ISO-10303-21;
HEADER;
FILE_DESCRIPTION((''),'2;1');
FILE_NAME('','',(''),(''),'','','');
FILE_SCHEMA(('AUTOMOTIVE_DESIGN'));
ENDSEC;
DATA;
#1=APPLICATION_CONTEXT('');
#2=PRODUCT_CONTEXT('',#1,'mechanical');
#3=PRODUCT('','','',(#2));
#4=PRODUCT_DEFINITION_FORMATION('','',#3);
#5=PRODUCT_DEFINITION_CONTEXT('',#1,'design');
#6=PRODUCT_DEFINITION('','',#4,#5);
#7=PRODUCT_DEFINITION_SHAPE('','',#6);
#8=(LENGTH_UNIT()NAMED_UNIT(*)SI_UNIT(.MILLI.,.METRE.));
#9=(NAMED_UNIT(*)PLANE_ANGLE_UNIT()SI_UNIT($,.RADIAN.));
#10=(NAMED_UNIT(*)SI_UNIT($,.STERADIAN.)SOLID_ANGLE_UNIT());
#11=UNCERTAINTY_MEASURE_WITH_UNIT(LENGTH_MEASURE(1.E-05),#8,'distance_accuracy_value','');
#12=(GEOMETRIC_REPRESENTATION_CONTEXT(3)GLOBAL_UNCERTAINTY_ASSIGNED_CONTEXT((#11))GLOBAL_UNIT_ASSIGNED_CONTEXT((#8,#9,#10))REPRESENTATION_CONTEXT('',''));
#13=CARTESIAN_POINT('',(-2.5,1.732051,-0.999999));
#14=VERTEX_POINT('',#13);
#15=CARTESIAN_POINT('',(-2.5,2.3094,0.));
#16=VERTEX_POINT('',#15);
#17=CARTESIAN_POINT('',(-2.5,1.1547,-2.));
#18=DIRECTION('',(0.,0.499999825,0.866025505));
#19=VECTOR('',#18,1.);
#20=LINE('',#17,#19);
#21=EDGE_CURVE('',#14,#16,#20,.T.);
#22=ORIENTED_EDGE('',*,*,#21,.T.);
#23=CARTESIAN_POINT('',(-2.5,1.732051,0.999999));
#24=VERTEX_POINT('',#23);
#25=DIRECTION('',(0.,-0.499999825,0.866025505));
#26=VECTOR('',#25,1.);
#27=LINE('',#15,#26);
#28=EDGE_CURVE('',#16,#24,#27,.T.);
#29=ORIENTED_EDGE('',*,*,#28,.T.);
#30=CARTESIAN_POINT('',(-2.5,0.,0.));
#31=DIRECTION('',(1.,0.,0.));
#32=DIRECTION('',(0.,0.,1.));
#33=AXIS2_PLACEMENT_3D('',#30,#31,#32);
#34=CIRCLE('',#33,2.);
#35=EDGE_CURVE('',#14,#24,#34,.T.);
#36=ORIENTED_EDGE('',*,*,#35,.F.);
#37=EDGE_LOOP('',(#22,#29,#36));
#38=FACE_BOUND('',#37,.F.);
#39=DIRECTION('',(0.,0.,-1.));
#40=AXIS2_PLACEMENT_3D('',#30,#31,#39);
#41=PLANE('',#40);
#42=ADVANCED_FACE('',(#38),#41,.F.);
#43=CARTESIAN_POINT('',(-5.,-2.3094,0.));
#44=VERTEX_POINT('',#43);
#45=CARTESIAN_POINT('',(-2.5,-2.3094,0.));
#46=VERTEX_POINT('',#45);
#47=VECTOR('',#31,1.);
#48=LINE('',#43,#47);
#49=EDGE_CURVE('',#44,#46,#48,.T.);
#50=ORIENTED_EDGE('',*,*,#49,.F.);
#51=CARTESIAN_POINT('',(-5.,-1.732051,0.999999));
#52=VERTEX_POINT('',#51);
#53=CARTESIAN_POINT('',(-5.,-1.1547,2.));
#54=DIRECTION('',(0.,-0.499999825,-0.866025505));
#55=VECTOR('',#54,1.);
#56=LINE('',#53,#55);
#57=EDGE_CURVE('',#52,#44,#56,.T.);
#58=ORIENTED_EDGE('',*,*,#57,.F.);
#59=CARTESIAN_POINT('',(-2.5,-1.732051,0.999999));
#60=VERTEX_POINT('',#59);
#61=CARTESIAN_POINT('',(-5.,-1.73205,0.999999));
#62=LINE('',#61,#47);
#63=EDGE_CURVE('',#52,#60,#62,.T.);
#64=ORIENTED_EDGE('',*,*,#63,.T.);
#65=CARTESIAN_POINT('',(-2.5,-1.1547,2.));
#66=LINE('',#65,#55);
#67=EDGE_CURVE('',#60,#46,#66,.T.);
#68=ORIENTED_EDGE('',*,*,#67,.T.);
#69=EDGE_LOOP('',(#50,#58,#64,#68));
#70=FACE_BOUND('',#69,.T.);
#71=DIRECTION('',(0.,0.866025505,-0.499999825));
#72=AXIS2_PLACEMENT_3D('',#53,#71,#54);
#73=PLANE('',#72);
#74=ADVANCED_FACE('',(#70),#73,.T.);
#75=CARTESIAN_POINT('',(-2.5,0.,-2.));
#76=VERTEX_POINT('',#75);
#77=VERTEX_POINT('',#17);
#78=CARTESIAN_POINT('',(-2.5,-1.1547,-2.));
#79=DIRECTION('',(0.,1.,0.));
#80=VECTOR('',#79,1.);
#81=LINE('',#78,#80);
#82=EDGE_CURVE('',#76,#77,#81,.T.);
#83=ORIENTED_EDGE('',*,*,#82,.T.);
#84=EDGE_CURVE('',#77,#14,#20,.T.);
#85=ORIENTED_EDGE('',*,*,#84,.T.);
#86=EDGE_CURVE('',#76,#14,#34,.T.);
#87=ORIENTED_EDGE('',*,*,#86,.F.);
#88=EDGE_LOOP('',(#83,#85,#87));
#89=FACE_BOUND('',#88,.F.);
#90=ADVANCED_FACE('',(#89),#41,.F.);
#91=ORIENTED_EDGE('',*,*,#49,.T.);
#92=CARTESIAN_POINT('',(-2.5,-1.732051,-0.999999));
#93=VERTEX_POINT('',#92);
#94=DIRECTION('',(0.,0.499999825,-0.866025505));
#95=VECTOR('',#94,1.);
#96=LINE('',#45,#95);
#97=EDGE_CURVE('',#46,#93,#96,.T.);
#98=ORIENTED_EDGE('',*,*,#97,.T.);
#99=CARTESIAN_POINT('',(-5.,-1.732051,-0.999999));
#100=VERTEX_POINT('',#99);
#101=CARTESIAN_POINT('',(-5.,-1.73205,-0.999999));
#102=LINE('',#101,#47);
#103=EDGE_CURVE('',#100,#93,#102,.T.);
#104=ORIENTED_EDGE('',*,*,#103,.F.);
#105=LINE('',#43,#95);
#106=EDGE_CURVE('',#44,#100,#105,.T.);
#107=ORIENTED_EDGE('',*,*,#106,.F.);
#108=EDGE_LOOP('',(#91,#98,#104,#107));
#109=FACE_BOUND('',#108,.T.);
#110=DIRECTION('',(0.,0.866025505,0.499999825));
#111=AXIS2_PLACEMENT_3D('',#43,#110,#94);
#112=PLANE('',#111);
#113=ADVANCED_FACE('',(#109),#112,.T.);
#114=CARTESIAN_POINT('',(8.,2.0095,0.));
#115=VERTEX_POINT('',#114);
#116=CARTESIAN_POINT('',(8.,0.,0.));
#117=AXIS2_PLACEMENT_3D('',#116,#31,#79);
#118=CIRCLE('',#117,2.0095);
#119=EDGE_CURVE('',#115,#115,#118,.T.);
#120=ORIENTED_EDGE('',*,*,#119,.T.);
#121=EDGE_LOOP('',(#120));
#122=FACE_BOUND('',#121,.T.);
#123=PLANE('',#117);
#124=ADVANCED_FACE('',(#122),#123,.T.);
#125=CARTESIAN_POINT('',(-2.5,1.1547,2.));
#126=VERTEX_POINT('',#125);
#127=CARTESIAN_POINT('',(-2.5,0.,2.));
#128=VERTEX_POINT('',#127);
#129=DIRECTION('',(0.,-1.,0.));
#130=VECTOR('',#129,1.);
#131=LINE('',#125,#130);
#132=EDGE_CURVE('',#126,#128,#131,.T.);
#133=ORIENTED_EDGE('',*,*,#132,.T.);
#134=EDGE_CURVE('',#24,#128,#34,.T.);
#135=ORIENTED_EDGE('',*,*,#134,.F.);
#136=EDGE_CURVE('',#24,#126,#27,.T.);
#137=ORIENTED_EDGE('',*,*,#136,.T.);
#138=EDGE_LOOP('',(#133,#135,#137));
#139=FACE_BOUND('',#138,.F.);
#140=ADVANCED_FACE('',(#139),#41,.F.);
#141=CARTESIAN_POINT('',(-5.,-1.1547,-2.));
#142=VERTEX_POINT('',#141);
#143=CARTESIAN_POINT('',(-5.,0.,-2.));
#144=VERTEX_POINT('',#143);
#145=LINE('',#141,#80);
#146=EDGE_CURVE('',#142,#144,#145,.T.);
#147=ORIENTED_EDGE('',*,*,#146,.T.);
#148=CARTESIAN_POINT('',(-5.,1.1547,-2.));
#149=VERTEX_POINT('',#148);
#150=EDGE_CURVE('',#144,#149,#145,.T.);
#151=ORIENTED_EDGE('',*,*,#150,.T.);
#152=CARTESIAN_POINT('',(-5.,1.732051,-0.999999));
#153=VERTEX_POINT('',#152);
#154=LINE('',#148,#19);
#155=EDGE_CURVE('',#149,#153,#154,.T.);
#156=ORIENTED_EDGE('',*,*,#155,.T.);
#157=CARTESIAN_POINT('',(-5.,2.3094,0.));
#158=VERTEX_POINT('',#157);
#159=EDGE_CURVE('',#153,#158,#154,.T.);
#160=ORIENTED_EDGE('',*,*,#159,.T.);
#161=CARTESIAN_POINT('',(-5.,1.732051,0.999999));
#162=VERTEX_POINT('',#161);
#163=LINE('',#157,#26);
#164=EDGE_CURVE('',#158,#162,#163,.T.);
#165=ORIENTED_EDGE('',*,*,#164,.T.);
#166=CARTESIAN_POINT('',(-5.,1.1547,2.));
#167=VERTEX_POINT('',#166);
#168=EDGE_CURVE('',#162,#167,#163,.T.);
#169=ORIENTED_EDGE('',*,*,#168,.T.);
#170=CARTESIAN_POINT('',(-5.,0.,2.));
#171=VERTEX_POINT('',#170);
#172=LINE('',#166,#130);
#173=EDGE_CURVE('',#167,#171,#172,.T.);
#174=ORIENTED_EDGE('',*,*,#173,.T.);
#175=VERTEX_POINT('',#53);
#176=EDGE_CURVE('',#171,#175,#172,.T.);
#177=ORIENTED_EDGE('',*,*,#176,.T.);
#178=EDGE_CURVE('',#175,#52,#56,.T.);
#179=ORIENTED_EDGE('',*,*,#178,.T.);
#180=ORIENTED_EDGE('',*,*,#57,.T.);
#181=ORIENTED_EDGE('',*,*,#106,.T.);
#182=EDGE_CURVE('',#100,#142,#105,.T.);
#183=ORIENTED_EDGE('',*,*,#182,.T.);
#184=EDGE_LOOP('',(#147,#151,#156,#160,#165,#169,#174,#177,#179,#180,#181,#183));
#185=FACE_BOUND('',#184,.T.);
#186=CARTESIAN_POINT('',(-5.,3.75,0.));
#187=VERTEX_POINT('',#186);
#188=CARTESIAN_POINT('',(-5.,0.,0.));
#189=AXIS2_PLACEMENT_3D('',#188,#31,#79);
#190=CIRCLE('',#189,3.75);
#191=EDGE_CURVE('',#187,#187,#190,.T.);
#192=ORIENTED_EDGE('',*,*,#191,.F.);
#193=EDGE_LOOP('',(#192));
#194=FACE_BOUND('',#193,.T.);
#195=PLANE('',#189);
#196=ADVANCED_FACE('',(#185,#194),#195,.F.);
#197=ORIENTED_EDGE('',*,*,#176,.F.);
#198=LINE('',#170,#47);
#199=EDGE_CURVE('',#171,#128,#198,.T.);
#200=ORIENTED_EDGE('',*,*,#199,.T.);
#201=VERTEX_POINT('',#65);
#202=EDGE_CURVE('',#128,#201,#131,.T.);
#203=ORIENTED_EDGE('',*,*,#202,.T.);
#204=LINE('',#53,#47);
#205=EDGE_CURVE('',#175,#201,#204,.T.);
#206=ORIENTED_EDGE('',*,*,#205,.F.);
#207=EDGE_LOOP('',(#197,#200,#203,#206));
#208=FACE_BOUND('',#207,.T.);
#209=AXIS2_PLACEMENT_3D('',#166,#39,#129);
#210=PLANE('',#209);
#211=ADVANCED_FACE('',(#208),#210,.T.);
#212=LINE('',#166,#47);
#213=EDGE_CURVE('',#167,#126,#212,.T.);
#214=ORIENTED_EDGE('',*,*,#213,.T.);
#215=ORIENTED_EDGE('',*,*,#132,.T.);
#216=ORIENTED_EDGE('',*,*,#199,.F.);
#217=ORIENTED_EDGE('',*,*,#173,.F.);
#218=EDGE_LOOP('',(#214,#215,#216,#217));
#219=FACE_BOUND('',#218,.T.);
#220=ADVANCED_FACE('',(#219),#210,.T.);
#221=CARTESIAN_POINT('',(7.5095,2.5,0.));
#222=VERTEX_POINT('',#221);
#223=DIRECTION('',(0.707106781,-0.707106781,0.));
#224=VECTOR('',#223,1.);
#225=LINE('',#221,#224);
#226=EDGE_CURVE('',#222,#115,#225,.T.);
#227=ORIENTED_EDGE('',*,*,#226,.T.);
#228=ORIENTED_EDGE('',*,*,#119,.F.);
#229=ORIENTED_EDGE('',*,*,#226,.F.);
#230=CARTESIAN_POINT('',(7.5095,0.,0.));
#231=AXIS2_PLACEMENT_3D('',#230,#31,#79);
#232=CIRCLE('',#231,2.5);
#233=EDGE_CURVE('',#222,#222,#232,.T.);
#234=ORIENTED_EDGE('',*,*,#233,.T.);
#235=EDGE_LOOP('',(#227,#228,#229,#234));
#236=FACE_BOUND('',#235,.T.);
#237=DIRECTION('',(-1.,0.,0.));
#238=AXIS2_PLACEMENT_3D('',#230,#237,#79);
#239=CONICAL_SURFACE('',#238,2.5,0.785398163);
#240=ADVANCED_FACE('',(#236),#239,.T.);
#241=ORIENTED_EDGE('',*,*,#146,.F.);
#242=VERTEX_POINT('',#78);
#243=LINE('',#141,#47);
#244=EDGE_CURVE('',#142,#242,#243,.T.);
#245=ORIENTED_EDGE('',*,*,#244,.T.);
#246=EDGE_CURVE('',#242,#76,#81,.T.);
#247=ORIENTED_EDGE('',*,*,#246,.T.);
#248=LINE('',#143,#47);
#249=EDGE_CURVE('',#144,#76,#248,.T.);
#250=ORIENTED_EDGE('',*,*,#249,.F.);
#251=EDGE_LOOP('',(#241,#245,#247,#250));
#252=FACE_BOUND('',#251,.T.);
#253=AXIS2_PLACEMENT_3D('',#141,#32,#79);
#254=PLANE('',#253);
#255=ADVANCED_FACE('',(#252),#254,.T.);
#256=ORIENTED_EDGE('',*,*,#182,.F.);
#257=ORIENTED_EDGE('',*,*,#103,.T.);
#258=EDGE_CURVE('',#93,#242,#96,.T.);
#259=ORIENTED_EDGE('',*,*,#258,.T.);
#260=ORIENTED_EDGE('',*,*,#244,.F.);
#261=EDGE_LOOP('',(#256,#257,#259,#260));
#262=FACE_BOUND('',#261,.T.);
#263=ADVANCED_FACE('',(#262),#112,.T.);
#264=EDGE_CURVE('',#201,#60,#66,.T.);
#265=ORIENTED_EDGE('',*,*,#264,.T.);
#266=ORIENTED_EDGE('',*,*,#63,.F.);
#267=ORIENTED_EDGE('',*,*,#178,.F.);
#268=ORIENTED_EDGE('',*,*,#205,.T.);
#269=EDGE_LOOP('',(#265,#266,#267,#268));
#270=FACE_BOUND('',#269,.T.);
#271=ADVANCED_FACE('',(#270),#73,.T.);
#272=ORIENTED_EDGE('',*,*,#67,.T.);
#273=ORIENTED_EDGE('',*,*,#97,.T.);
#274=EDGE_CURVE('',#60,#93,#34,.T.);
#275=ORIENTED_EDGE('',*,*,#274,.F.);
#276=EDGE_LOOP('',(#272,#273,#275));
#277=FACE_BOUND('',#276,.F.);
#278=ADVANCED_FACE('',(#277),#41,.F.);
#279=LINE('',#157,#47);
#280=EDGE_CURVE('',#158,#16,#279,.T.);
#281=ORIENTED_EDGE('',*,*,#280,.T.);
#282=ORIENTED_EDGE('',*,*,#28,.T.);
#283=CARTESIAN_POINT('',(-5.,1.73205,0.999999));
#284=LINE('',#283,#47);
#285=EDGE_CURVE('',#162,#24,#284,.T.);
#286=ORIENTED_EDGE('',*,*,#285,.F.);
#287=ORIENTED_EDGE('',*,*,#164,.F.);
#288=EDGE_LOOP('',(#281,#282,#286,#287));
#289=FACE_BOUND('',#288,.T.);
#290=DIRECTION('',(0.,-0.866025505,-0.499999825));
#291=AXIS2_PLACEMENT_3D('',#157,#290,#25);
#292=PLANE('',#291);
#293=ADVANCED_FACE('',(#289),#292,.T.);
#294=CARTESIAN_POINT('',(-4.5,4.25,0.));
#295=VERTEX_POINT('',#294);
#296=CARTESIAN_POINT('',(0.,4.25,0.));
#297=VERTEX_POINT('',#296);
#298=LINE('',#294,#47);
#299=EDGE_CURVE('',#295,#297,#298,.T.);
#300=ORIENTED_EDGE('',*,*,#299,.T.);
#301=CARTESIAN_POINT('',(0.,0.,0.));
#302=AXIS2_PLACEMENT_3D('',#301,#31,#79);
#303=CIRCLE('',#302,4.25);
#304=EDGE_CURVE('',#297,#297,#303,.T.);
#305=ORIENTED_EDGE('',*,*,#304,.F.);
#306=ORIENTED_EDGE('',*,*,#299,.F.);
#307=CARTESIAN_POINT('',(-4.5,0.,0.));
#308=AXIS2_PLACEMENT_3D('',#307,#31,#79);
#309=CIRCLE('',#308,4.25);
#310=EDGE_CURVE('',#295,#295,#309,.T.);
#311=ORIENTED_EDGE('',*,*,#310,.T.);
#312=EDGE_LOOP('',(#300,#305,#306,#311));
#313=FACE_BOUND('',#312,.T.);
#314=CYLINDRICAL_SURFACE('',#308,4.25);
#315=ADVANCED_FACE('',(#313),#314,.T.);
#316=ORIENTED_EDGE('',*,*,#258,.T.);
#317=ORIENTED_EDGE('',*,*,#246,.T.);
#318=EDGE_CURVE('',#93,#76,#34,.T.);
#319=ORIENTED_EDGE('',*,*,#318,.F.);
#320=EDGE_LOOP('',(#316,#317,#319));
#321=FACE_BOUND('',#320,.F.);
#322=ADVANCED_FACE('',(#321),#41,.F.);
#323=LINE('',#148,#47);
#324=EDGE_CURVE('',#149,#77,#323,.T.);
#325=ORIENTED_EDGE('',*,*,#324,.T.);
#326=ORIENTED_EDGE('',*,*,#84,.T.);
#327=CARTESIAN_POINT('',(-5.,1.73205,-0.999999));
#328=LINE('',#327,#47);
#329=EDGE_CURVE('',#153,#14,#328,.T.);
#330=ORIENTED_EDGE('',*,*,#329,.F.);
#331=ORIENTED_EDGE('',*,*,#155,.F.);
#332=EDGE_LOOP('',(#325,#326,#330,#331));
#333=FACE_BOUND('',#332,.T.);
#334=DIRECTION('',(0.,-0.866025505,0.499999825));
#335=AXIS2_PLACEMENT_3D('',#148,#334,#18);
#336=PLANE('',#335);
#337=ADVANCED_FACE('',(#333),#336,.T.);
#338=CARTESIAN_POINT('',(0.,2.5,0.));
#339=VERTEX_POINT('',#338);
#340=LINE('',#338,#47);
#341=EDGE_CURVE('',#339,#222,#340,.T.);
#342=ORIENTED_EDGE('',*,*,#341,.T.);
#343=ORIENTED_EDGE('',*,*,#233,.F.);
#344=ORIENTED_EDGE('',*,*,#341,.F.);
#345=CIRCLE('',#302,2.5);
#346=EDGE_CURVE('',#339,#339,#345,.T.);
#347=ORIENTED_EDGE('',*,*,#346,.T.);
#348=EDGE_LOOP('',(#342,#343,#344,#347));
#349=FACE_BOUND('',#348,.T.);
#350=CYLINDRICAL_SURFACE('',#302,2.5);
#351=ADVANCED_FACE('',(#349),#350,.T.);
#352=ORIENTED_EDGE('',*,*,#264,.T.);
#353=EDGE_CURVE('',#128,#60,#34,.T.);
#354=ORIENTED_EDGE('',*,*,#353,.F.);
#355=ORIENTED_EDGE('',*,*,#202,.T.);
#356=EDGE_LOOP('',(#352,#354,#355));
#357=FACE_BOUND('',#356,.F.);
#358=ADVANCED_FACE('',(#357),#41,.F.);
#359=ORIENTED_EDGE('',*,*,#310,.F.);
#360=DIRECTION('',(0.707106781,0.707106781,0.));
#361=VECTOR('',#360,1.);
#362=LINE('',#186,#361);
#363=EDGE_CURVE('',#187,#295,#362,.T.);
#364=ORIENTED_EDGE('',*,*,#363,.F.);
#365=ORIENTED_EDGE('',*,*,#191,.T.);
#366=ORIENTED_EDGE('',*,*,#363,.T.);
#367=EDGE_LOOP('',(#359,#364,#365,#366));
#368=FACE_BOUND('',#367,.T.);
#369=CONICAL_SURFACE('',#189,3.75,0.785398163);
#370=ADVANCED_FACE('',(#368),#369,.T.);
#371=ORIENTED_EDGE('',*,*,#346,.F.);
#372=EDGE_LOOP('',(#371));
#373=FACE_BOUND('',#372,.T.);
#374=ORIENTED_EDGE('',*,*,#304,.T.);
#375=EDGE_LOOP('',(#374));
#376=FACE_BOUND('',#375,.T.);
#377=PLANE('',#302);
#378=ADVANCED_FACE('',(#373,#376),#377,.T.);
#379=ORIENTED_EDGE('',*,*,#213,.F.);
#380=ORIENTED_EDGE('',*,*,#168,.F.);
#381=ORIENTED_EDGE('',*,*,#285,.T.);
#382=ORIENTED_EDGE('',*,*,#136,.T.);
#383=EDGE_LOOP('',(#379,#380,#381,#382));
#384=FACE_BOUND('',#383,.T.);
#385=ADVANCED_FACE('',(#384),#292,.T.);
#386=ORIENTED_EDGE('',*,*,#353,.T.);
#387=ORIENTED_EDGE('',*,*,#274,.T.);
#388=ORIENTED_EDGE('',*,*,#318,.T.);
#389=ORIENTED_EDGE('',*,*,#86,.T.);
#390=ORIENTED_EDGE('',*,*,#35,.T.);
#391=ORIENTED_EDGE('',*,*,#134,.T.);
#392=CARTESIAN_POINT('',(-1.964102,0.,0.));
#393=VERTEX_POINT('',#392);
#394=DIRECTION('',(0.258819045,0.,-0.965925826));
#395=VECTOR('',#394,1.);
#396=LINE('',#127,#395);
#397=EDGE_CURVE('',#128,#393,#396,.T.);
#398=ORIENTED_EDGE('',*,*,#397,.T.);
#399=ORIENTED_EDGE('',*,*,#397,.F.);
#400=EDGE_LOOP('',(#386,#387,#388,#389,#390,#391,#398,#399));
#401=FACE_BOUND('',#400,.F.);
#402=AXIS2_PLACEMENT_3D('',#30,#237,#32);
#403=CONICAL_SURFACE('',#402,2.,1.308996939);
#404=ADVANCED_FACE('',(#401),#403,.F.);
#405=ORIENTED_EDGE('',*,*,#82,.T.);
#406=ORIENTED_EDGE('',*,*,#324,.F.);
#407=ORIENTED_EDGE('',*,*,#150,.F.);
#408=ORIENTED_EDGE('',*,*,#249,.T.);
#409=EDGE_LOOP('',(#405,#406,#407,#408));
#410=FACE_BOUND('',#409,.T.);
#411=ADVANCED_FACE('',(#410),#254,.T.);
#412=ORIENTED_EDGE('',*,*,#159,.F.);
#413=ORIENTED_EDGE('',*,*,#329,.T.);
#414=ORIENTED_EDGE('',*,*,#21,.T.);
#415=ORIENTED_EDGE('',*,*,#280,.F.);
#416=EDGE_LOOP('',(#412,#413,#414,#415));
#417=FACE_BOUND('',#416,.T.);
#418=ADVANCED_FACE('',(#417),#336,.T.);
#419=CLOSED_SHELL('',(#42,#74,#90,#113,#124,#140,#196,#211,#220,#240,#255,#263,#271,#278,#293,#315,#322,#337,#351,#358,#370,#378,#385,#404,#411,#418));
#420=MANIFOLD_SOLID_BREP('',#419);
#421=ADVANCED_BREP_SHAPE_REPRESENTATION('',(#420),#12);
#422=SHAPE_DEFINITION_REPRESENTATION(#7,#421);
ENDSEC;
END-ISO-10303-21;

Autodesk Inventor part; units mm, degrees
sketch "Sketch_1" plane through (0, 0, 0) normal (0, 0, 1) x (1, 0, 0)
  line L0 (8, 0) -> (-5, 0)
  line L1 (-5, 0) -> (-5, 3.75)
  line L2 (-5, 3.75) -> (-4.5, 4.25)
  line L3 (-4.5, 4.25) -> (0, 4.25)
  line L4 (0, 4.25) -> (0, 2.5)
  line L5 (0, 2.5) -> (7.5095, 2.5)
  line L6 (7.5095, 2.5) -> (8, 2.0095)
  line L7 (8, 2.0095) -> (8, 0)
  line L8 (8, 0) -> (-5, 0)
revolve "Revolution1" add sketch "Sketch_1" angle 360 about axis through (8, 0, 0) along (1, 0, 0)
thread "Thread1" size "M5x0.8" class "6g" standard "ISO Metric profile" length 6.7095
sketch "Sketch2" plane through (-5, 0, 0) normal (-1, 0, 0) x (0, 0, 1)
  point P0 (0, 0)
hole "Hole1" at (-5, 0, 0) direction (1, 0, 0) diameter 4 depth 2.5 tip angle 150
sketch "Sketch_3" plane through (-5, 0, 0) normal (1, 0, 0) x (0, 0, -1)
  line L0 (-2, -1.1547) -> (0, -2.3094)
  line L1 (0, -2.3094) -> (2, -1.1547)
  line L2 (2, -1.1547) -> (2, 1.1547)
  line L3 (2, 1.1547) -> (0, 2.3094)
  line L4 (0, 2.3094) -> (-2, 1.1547)
  line L5 (-2, 1.1547) -> (-2, -1.1547)
extrude "Extrusion1" cut sketch "Sketch_3" along normal blind 2.5
ref_plane "bolt_XY" through (0, 0, 0) normal (1, 0, 0) x (0, 0, -1)
ref_plane "bolt_YZ" through (0, 0, 0) normal (0, 0, -1) x (0, 1, 0)
ref_plane "bolt_ZX" through (0, 0, 0) normal (0, 1, 0) x (1, 0, 0)
ref_plane "nut_XY" through (8, 0, 0) normal (1, 0, 0) x (0, 0, -1)
ref_plane "nut_YZ" through (8, 0, 0) normal (0, 0, -1) x (0, 1, 0)
ref_plane "nut_ZX" through (8, 0, 0) normal (0, 1, 0) x (1, 0, 0)
properties part number "SCB5-8" material "鋼"
